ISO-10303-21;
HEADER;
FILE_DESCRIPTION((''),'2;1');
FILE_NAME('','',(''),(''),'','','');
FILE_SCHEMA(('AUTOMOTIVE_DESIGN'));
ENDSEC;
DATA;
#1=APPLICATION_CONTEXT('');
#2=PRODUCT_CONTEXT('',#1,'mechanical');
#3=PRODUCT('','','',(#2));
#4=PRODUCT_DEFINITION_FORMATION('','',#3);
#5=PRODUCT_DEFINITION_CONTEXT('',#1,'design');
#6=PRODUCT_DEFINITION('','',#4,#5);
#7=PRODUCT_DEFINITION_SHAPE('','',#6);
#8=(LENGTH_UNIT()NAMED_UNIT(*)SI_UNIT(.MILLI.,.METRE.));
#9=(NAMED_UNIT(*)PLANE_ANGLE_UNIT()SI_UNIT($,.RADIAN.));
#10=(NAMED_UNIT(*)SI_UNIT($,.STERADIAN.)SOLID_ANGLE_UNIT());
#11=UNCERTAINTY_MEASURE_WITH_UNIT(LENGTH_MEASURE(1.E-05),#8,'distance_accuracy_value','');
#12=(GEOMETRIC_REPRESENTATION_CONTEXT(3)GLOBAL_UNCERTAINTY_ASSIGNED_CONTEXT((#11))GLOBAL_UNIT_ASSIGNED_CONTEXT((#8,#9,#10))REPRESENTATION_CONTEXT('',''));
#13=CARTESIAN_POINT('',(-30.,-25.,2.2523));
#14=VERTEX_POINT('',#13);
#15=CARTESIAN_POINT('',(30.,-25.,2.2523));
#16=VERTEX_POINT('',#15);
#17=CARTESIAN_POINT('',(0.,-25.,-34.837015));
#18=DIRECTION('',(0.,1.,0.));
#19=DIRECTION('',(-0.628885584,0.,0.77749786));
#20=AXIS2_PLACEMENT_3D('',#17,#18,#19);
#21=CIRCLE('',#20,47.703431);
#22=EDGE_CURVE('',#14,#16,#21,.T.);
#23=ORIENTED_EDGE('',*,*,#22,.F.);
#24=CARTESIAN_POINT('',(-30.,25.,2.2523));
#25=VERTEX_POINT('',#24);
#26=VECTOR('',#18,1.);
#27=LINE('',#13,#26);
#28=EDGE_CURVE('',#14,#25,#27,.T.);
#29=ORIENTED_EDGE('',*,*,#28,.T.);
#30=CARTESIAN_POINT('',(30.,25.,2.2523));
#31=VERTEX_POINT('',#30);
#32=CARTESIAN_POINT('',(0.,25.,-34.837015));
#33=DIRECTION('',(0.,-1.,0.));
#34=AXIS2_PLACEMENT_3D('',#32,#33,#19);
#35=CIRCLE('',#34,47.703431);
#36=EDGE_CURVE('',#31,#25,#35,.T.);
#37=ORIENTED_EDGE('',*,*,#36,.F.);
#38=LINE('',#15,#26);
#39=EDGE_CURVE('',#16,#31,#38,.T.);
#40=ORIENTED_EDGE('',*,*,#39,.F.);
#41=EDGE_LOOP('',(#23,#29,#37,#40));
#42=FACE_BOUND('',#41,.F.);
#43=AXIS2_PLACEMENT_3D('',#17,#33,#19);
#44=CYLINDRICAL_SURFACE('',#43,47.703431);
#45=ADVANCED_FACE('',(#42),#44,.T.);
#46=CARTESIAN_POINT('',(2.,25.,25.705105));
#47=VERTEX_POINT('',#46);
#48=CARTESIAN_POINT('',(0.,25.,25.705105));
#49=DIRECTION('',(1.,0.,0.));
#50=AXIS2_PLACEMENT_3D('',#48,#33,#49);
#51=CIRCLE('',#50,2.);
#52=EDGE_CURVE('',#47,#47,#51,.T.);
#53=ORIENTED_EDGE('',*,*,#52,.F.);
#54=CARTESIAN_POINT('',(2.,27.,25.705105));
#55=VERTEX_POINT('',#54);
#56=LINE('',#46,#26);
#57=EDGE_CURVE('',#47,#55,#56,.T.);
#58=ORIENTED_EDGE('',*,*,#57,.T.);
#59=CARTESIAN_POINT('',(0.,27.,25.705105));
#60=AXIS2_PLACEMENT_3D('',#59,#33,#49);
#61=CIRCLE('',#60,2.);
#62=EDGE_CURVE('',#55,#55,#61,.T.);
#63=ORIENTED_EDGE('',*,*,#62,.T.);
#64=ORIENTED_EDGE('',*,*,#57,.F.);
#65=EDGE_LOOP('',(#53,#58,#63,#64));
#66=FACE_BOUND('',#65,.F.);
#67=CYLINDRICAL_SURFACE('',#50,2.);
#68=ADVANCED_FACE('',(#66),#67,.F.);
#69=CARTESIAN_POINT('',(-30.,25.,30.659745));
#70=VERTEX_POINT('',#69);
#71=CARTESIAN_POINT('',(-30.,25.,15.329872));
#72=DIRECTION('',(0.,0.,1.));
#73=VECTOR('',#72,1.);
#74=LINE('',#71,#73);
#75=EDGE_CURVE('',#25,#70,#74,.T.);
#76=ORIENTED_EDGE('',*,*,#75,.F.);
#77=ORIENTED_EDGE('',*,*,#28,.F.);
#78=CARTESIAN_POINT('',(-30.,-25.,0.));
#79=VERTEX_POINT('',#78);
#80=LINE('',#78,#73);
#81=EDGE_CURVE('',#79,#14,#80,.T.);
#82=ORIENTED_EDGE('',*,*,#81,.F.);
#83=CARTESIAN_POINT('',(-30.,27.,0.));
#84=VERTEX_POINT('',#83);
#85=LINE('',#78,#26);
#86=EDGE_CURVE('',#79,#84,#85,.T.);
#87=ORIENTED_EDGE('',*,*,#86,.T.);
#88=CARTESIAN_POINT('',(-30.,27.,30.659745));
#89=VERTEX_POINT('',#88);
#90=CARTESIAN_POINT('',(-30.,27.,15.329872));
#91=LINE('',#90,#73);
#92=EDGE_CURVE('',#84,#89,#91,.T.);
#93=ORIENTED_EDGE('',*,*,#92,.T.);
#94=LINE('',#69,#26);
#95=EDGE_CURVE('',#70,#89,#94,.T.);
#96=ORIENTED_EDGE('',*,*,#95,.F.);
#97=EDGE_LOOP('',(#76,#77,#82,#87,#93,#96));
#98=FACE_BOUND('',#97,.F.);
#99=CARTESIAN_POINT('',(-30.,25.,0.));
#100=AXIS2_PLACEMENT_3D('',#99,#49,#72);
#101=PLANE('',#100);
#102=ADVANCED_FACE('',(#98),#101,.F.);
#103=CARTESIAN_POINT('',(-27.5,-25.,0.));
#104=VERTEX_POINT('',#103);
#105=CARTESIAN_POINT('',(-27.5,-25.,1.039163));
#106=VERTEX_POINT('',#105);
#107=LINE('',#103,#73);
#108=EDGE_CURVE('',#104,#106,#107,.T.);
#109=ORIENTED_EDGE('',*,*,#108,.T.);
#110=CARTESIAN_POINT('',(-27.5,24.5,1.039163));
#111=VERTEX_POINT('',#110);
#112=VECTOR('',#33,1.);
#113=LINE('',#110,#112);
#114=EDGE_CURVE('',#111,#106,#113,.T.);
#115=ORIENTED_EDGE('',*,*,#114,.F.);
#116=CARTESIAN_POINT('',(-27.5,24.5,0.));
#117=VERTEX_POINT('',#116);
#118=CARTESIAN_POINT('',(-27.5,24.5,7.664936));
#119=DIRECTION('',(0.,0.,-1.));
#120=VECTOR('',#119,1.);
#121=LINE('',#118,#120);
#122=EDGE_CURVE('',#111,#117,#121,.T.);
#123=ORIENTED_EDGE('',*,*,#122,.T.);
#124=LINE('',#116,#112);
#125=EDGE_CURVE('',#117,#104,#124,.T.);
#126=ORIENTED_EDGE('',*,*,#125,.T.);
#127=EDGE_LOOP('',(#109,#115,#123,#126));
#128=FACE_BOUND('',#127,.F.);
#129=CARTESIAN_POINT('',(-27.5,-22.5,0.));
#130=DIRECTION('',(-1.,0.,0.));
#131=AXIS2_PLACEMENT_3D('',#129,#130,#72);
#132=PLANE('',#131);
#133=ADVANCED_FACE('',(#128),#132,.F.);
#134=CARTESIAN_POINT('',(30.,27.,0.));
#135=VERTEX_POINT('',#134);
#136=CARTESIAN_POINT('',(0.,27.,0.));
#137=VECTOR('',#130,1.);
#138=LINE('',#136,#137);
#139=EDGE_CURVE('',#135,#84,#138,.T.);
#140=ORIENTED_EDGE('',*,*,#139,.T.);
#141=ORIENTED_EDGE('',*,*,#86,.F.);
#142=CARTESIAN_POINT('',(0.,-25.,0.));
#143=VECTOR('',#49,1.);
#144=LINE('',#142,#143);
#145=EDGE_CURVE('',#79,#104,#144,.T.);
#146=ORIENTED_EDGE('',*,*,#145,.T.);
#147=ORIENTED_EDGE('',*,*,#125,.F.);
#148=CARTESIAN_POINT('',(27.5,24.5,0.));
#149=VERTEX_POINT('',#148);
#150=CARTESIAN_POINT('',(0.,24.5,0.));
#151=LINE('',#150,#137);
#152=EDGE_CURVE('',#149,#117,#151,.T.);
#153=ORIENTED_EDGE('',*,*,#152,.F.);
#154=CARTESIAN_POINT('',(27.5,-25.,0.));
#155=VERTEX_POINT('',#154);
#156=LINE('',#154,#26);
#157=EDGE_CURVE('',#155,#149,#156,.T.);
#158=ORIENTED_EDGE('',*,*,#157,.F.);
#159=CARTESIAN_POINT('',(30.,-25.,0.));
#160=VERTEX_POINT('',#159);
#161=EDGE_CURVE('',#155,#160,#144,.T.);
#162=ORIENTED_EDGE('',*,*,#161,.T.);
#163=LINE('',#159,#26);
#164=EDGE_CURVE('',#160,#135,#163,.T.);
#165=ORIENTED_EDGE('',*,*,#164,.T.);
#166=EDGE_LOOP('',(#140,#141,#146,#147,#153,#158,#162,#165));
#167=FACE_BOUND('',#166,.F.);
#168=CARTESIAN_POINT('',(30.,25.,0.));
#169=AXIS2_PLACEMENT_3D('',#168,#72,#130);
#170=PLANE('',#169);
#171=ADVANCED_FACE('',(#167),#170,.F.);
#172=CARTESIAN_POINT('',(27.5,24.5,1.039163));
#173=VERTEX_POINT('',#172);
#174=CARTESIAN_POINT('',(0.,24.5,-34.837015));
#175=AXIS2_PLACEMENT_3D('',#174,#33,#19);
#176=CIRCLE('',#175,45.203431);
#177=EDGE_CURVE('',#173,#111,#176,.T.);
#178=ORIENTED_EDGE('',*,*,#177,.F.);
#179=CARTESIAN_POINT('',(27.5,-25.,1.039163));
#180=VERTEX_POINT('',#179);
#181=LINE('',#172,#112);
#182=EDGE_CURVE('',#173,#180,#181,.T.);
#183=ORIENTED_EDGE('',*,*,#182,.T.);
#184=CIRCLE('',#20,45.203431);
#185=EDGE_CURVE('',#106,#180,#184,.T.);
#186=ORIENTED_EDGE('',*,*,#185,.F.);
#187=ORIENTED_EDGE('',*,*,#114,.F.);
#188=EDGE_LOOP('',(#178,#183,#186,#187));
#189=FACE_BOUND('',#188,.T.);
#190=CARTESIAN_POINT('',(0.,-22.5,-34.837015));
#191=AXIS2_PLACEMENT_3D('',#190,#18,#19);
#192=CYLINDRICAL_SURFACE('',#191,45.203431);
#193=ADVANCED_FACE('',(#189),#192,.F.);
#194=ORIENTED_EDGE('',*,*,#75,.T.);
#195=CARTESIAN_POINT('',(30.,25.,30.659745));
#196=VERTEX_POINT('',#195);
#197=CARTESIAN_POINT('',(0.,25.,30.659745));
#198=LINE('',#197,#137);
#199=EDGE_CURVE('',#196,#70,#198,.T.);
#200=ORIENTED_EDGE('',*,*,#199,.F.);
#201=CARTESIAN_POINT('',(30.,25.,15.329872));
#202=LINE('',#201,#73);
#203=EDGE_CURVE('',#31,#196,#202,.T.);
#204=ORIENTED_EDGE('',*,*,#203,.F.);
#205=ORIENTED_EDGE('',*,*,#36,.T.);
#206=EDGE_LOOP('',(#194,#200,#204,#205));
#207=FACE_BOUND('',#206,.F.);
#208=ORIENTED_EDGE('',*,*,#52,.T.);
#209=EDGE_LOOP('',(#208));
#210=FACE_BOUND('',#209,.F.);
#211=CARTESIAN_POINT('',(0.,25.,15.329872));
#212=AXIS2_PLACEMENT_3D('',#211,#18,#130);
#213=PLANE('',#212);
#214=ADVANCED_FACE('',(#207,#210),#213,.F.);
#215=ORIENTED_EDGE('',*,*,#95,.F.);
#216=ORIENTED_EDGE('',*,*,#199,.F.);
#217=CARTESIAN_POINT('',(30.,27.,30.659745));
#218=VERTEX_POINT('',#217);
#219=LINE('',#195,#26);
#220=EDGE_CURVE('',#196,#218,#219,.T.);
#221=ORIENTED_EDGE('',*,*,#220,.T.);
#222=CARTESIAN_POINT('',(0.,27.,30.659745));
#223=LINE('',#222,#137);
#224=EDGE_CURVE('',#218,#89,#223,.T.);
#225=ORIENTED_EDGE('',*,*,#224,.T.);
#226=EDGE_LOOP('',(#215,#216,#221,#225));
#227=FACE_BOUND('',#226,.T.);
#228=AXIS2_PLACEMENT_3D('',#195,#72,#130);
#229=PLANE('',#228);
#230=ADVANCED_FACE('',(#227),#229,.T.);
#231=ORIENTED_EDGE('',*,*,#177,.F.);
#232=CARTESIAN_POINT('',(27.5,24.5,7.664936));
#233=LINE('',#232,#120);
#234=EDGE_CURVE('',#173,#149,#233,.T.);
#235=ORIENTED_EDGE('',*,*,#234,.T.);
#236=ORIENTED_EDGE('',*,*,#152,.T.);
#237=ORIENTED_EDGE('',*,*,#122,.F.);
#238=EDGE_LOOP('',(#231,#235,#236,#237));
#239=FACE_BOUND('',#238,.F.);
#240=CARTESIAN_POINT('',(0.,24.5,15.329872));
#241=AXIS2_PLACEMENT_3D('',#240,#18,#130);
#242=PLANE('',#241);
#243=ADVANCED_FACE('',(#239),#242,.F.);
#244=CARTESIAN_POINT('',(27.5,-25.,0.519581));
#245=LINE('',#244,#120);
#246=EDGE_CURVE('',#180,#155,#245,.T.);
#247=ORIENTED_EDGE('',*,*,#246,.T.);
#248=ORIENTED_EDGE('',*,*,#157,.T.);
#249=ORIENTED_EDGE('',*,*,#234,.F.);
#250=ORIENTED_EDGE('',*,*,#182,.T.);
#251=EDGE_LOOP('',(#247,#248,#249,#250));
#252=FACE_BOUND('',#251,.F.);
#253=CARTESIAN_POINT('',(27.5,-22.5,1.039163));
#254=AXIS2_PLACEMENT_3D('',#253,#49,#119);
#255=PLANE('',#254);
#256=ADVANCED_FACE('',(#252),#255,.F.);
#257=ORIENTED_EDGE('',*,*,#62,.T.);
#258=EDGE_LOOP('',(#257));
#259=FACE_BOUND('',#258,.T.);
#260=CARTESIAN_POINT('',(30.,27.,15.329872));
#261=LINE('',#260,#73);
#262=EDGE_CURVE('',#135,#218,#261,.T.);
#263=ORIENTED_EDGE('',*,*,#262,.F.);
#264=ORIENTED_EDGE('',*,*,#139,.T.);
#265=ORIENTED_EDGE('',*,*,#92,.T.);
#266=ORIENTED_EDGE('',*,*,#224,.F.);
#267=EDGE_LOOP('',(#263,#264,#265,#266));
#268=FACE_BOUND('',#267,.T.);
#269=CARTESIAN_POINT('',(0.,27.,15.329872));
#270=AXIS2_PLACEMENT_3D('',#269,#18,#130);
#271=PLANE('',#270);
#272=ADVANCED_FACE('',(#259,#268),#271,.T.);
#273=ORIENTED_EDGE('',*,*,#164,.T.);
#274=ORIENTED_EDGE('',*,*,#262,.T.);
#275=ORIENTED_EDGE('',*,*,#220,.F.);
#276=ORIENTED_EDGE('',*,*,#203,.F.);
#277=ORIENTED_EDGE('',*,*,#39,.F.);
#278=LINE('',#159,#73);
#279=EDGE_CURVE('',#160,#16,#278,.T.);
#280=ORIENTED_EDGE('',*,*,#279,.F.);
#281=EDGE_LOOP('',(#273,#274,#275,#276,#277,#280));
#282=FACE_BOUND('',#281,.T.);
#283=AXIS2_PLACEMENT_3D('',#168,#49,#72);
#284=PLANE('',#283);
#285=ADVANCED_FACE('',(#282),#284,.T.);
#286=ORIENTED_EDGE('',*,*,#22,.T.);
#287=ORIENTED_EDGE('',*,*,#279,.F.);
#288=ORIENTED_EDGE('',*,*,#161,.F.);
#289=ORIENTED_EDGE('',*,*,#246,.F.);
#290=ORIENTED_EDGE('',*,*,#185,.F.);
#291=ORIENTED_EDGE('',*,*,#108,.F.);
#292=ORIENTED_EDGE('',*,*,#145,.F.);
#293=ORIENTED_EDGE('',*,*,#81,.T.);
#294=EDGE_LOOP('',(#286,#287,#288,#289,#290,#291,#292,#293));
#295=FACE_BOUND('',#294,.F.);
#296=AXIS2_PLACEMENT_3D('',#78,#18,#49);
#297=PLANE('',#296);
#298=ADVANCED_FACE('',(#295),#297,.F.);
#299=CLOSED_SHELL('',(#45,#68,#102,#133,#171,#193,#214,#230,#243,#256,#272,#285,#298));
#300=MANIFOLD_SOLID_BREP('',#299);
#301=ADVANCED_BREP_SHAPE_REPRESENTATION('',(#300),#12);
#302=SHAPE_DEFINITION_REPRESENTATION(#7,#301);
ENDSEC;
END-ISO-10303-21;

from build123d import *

# Parameters (mm, degrees)
F0_W     = 60
F0_H     = 50
F1_DEPTH = 25
F3_DEPTH = 50.001
F4_W     = 60
F4_H     = 30.659744516
F5_DEPTH = 2
F6_R     = 2
F7_DEPTH = 2.001
F8_T     = -2.5
F9_DEPTH = 25


# Not quite as in the source:
# - a feature of the source that left no trace in its solid (it failed there, or was rolled back) is left out


with BuildPart() as f1:
    # F0 (on Top) → F1 (new body)
    with BuildSketch(Plane.XY):
        Rectangle(F0_W, F0_H)
    extrude(amount=F1_DEPTH)

    # F2 (on face) → F3 (cut, through all)
    with BuildSketch(Plane.XZ.offset(25)):
        with BuildLine():
            ThreePointArc((-30, 2.2523000371), (0, 12.8664154965), (30, 2.2523000371))
            Line((30, 2.2523000371), (30, 25))
            Line((30, 25), (-30, 25))
            Line((-30, 25), (-30, 2.2523000371))
        make_face()
    extrude(amount=-F3_DEPTH, mode=Mode.SUBTRACT)

    # F4 (on face) → F5 (join)
    with BuildSketch(Plane(origin=(0, 25, 0), x_dir=(-1, 0, 0), z_dir=(0, 1, 0))):
        with Locations((0, 15.329872258)):
            Rectangle(F4_W, F4_H)
    extrude(amount=F5_DEPTH)

    # F6 (on face) → F7 (cut, through all)
    with BuildSketch(Plane.XZ.offset(-25)):
        with Locations((0, 25.7051046938)):
            Circle(F6_R)
    extrude(amount=-F7_DEPTH, mode=Mode.SUBTRACT)

    # F8
    f8_openings = [f1.faces().sort_by_distance(p)[0] for p in [
        (0, 1, 0),
    ]]
    offset(amount=F8_T, openings=f8_openings)

    # F9 (cut): a face of the model
    f9_faces = [f1.faces().sort_by_distance(p)[0] for p in [
        (0, -22.5, 4.2031942767),
    ]]
    extrude(f9_faces, amount=-F9_DEPTH, mode=Mode.SUBTRACT)


solid = f1.part
